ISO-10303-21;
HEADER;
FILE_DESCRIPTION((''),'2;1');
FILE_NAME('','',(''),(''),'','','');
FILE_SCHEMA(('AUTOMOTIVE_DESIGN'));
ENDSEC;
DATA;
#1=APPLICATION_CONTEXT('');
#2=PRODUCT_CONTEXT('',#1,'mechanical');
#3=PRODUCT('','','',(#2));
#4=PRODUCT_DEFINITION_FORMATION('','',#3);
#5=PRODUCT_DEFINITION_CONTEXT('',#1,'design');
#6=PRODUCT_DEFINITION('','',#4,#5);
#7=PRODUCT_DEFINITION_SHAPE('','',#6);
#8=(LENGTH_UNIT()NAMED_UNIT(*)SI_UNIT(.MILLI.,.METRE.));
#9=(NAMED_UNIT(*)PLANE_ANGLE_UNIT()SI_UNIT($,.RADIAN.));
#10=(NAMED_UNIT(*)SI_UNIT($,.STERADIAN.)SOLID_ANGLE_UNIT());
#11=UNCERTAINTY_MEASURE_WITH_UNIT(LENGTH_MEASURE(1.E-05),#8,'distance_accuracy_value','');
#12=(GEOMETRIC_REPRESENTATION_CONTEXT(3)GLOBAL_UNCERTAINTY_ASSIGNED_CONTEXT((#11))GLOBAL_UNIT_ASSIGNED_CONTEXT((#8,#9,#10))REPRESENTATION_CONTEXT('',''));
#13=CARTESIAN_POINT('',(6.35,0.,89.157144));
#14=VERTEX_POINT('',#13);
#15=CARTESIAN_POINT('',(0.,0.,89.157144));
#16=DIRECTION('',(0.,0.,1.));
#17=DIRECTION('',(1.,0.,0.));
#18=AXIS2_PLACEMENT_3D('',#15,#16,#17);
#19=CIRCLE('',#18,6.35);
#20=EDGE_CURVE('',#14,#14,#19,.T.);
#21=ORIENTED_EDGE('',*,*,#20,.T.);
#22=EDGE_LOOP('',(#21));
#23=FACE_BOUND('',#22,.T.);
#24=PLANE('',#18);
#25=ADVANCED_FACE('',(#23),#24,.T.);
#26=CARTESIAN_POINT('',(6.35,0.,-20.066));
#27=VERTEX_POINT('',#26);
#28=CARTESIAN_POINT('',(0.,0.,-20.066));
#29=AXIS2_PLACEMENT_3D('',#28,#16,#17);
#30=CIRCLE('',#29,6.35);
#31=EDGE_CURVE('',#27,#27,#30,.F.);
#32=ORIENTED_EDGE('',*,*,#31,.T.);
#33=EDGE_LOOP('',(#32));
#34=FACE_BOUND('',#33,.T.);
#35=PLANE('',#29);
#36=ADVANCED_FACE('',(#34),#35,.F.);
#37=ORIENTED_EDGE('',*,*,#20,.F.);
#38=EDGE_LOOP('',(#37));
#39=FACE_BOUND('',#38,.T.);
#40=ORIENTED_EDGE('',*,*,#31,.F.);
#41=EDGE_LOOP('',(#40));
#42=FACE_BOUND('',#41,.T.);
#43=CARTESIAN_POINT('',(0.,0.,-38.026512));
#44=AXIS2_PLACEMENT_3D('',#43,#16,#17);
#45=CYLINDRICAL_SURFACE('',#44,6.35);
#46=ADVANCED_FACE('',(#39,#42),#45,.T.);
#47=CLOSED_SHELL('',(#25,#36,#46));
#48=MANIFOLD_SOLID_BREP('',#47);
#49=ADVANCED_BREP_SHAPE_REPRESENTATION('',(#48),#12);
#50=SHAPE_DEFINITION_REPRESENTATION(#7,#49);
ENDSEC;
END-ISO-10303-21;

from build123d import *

# Parameters (mm, degrees)
BOSS_EXTRUDE1_START     = -109.223144111
BOSS_EXTRUDE1_OUTLINE_R = 6.35
BOSS_EXTRUDE1_DEPTH     = 109.223144111


# Read off the part's stored shape, not the designer's step: Boss-Extrude1
with BuildPart() as part:
    # Boss-Extrude1 outline → Boss-Extrude1 (new body)
    with BuildSketch(Plane.XY.offset(89.157144111).offset(BOSS_EXTRUDE1_START)):
        Circle(BOSS_EXTRUDE1_OUTLINE_R)
    extrude(amount=BOSS_EXTRUDE1_DEPTH)


solid = part.part
